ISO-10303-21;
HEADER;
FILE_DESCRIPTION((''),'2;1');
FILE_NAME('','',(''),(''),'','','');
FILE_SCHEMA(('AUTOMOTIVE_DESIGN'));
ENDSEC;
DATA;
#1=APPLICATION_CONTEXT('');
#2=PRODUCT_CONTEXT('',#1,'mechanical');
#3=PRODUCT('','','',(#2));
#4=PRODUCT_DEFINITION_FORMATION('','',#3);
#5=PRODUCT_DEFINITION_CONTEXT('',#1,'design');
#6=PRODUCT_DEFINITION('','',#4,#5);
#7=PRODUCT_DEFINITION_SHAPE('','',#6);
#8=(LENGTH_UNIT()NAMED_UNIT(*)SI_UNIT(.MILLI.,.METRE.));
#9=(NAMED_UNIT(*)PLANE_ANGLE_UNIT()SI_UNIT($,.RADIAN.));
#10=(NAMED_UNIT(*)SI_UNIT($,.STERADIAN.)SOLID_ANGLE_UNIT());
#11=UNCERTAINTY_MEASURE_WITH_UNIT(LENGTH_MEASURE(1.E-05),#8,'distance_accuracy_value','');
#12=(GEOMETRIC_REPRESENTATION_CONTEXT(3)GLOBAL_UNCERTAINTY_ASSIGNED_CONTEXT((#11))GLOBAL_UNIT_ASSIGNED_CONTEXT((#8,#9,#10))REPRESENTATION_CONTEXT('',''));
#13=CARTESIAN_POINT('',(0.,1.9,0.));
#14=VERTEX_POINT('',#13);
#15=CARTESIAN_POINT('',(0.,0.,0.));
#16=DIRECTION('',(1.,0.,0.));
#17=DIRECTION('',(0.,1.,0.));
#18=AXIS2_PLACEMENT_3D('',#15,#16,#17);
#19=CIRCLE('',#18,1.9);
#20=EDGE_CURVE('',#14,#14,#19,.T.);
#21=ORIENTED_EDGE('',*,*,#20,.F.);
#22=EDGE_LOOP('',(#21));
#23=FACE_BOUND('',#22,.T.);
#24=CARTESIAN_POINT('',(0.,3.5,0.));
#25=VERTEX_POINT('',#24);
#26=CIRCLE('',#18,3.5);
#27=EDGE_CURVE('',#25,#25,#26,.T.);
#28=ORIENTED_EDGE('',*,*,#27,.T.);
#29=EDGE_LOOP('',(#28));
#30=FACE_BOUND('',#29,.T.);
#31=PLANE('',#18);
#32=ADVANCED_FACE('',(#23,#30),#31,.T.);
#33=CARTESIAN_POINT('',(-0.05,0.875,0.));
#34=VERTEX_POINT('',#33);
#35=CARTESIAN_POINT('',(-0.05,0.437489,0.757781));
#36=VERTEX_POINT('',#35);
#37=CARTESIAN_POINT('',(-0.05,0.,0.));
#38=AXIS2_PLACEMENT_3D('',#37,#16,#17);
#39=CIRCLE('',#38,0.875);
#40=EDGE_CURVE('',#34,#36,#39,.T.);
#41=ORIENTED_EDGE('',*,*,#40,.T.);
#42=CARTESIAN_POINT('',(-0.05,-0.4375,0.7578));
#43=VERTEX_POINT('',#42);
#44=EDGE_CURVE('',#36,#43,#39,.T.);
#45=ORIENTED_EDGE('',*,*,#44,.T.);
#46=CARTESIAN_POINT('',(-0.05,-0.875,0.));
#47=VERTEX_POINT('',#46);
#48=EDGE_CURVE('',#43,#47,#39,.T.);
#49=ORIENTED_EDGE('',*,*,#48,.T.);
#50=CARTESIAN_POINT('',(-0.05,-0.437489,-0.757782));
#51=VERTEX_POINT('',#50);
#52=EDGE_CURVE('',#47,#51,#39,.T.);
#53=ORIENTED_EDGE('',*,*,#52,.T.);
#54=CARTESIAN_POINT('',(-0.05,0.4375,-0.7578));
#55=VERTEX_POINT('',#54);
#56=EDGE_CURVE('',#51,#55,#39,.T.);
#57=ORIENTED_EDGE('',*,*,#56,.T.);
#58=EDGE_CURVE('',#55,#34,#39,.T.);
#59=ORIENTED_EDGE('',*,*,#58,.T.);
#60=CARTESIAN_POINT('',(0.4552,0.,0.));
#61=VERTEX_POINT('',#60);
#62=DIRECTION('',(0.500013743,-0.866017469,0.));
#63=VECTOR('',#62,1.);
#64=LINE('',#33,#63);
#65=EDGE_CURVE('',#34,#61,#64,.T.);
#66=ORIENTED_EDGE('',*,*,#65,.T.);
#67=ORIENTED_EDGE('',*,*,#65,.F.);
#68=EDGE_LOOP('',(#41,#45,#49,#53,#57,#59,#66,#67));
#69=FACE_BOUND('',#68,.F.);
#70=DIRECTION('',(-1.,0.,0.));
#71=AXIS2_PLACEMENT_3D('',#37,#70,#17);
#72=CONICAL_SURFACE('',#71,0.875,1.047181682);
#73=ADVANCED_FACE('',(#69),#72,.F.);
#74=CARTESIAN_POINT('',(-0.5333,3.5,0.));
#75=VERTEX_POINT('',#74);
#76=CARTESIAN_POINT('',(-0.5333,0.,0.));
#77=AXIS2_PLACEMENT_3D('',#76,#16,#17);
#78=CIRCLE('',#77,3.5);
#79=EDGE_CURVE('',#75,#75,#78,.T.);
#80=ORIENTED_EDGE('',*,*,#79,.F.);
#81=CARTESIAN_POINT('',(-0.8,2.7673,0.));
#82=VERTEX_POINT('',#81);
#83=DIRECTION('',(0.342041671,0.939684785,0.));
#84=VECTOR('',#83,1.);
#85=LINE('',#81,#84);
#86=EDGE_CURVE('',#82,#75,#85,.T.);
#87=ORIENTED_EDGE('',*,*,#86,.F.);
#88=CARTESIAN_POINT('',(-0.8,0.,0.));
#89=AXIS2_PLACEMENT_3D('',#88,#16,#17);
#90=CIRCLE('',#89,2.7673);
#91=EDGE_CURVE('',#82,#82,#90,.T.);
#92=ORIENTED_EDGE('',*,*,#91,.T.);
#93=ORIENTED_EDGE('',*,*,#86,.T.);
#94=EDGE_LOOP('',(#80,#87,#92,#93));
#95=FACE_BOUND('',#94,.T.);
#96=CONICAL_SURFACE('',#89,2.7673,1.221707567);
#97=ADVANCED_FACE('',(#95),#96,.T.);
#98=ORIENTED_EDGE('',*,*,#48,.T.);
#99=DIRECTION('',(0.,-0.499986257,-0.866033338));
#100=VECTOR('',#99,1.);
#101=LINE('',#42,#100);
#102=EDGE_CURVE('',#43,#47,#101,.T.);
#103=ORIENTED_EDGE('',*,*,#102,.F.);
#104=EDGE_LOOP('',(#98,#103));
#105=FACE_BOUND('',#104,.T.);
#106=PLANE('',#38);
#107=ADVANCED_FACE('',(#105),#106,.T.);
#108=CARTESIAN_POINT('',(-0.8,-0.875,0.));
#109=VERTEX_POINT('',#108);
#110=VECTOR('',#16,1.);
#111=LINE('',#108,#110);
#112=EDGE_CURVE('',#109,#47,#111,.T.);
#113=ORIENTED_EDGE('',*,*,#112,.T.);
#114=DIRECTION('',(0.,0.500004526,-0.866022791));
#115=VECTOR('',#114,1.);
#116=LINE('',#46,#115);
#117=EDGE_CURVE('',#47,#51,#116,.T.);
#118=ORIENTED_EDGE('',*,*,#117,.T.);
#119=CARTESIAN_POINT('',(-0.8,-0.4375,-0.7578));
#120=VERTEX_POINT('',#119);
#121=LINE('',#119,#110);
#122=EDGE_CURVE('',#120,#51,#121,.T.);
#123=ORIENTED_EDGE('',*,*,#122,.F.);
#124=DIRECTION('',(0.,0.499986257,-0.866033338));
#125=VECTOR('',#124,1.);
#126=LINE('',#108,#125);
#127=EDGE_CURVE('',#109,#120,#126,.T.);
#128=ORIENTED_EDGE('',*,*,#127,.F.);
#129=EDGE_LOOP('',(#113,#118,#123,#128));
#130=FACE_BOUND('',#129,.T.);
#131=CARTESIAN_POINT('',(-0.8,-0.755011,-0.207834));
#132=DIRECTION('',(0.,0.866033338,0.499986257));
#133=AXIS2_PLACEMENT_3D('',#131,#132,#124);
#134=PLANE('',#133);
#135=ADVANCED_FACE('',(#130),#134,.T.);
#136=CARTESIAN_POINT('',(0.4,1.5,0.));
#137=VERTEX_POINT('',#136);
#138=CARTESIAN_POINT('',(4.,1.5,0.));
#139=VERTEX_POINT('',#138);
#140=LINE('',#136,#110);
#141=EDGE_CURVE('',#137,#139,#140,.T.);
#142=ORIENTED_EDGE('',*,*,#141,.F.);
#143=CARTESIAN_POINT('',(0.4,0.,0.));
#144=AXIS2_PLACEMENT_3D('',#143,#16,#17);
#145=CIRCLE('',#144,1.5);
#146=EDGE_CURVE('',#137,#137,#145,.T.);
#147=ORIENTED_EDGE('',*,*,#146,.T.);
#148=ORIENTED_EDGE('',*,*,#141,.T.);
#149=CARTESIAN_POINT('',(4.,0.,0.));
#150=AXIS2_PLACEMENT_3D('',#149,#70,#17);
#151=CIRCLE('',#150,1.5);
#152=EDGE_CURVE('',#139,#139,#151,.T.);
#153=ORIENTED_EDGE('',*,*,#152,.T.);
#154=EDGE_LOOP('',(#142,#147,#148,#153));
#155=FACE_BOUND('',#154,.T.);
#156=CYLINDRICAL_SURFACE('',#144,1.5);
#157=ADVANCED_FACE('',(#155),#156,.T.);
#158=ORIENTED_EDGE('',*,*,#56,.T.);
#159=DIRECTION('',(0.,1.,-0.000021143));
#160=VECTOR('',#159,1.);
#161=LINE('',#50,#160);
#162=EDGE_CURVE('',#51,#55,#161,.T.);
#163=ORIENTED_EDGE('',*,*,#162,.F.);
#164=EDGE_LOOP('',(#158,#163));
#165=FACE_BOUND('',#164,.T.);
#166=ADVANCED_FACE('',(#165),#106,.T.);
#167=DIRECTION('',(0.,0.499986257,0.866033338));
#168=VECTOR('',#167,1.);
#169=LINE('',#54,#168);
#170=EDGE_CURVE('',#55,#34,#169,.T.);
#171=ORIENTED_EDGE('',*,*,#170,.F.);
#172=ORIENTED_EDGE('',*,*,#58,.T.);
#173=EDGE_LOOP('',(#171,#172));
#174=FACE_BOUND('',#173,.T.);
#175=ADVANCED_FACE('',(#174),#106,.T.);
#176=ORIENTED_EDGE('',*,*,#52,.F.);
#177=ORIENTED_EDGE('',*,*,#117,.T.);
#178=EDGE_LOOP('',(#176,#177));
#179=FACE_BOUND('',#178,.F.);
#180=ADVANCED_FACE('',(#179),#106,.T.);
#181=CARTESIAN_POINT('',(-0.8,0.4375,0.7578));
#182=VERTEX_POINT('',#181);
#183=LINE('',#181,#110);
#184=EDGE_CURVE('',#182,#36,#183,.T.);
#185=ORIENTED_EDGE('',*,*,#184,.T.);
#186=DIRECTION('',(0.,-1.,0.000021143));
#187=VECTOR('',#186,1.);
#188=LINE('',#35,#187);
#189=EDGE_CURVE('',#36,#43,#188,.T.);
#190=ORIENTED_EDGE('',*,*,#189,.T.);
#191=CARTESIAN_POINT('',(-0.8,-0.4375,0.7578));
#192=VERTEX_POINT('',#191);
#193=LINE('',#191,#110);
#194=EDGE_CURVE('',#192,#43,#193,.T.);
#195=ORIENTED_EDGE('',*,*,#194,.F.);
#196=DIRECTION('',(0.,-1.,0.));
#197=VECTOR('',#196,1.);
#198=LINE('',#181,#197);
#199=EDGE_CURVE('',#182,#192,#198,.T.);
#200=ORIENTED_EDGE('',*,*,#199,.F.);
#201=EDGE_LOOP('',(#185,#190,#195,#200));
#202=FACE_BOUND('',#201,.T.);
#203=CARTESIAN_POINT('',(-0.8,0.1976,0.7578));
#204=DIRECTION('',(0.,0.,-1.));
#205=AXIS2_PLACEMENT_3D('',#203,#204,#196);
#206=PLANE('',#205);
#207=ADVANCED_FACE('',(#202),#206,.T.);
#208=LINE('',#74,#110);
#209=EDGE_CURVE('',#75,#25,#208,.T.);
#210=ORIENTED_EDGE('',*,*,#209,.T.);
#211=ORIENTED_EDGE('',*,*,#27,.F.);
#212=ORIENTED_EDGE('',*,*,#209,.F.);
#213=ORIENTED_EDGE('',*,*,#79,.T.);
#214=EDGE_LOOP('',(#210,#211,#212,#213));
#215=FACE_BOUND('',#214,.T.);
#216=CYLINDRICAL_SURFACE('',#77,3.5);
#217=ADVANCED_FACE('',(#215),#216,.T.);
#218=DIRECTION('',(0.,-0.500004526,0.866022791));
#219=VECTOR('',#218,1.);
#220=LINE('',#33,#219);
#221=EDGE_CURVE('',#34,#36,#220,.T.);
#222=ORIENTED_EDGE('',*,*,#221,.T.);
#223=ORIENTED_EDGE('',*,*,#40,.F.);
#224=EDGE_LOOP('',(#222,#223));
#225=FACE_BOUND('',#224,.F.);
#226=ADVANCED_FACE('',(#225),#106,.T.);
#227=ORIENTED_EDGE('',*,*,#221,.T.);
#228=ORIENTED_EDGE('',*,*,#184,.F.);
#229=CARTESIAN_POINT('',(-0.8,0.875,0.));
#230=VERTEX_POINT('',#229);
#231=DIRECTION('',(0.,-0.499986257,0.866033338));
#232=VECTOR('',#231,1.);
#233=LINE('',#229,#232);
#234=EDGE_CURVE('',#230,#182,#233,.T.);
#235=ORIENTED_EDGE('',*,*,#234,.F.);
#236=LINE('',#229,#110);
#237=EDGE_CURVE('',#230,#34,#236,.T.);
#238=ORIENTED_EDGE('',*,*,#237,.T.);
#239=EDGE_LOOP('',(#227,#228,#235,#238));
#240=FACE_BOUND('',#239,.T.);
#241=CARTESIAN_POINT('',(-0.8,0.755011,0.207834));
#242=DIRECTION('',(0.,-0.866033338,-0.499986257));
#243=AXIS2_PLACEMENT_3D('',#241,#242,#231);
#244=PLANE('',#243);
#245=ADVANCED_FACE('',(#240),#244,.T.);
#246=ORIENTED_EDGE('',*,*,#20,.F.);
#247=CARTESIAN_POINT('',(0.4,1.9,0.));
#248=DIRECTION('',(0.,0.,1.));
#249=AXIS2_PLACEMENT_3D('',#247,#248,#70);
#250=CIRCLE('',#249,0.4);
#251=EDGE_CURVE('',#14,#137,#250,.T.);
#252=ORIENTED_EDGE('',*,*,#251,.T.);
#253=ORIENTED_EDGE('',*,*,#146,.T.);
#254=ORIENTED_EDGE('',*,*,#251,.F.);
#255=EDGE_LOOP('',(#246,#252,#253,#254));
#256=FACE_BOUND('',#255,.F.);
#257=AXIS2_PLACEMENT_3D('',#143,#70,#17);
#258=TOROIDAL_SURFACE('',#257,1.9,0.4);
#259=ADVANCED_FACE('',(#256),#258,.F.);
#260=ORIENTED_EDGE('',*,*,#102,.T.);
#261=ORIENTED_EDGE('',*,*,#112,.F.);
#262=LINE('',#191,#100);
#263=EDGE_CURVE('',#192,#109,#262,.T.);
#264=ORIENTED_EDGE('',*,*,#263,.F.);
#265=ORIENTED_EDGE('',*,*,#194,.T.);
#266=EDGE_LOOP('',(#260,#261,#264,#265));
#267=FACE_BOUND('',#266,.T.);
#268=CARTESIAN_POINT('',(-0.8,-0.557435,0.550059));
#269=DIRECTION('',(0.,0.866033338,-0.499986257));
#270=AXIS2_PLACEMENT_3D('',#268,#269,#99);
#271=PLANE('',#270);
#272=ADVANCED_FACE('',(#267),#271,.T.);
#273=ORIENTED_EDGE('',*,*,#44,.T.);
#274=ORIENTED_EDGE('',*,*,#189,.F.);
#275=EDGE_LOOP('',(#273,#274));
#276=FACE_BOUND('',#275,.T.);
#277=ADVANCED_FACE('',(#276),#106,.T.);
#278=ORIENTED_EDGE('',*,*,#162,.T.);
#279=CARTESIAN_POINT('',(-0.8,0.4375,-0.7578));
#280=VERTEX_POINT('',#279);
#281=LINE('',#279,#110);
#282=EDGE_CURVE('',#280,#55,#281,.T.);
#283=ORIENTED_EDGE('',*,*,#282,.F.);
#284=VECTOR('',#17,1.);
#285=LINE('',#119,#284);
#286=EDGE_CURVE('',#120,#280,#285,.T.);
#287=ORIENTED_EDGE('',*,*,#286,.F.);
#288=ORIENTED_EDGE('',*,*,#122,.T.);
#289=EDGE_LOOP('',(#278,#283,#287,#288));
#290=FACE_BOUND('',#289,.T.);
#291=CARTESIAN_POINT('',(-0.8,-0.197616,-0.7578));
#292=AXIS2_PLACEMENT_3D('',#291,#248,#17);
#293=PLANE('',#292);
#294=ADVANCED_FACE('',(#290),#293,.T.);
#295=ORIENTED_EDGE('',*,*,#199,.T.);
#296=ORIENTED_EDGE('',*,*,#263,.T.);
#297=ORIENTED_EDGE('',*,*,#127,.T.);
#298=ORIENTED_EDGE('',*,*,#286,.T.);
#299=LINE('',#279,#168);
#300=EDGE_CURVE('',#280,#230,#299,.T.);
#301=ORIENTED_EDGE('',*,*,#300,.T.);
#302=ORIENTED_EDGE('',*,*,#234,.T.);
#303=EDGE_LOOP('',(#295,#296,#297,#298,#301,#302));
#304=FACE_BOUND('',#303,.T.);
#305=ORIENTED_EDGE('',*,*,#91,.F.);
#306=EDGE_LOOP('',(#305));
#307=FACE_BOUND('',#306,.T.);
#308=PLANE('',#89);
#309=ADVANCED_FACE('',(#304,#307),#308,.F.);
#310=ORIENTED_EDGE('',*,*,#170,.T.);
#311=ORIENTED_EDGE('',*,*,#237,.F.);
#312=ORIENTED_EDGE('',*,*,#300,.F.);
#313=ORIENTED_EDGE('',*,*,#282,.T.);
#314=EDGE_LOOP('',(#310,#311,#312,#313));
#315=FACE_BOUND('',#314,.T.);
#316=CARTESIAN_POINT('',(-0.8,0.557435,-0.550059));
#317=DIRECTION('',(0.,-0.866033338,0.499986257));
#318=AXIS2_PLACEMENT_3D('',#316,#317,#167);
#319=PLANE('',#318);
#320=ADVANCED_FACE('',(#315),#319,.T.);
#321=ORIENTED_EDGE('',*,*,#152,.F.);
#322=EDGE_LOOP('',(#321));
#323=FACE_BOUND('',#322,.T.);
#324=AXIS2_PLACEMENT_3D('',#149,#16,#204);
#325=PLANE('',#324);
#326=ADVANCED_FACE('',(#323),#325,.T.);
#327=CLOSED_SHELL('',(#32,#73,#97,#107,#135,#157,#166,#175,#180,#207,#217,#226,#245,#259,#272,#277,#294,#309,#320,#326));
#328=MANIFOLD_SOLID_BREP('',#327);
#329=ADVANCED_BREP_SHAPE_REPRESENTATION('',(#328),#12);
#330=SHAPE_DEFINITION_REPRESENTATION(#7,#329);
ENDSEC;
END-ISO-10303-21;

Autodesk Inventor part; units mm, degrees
ref_plane "YZ Plane" through (0, 0, 0) normal (1, 0, 0) x (0, 1, 0)
ref_plane "XZ Plane" through (0, 0, 0) normal (0, 1, 0) x (-1, 0, 0)
ref_plane "XY Plane" through (0, 0, 0) normal (0, 0, 1) x (1, 0, 0)
sketch "Sketch_1" plane through (0, 0, 0) normal (0, 0, 1) x (1, 0, 0)
  line L0 (6, 0) -> (0, 0)
  line L1 (-0.8, 0) -> (-0.8, 2.7673)
  line L2 (-0.8, 2.7673) -> (-0.5333, 3.5)
  line L3 (-0.5333, 3.5) -> (0, 3.5)
  line L4 (0, 3.5) -> (0, 1.9)
  arc A0 (0, 1.9) -> (0.4, 1.5) centre (0.4, 1.9) ccw
  line L5 (0.4, 1.5) -> (6, 1.5)
  line L6 (6, 1.5) -> (6, 0)
  line L7 (6, 0) -> (-0.8, 0)
  line L8 (0, 0) -> (-0.8, 0)
  dimension "d6" = 6
revolve "Revolution1" add sketch "Sketch_1" angle 360 about axis through (6, 0, 0) along (1, 0, 0)
thread "Thread1" size "M3x0.5" class "6g" standard "ISO Metric profile" length 5.5 offset 0.1
sketch "Sketch_5" plane through (-0.05, 0, 0) normal (1, 0, 0) x (0, 0, -1)
  arc A0 (-0.6801, -0.1159) -> (-0.4404, -0.531) centre (-0.5499, -0.3175) ccw
  arc A1 (-0.341, -0.5357) -> (-0.4404, -0.531) centre (-0.3947, -0.62) ccw
  arc A2 (-0.341, -0.5357) -> (-0.2934, -0.5632) centre (0, 0) ccw
  arc A3 (-0.2397, -0.6469) -> (-0.2934, -0.5632) centre (-0.3396, -0.6519) ccw
  arc A4 (-0.2397, -0.6469) -> (0.2397, -0.6469) centre (0, -0.635) ccw
  arc A5 (0.2934, -0.5632) -> (0.2397, -0.6469) centre (0.3396, -0.6519) ccw
  arc A6 (0.2934, -0.5632) -> (0.341, -0.5357) centre (0, 0) ccw
  arc A7 (0.4404, -0.531) -> (0.341, -0.5357) centre (0.3947, -0.62) ccw
  arc A8 (0.4404, -0.531) -> (0.6801, -0.1159) centre (0.5499, -0.3175) ccw
  arc A9 (0.6344, -0.0275) -> (0.6801, -0.1159) centre (0.7343, -0.0318) ccw
  arc A10 (0.6344, -0.0275) -> (0.6344, 0.0275) centre (0, 0) ccw
  arc A11 (0.6801, 0.1159) -> (0.6344, 0.0275) centre (0.7343, 0.0318) ccw
  arc A12 (0.6801, 0.1159) -> (0.4404, 0.531) centre (0.5499, 0.3175) ccw
  arc A13 (0.341, 0.5357) -> (0.4404, 0.531) centre (0.3947, 0.62) ccw
  arc A14 (0.341, 0.5357) -> (0.2934, 0.5632) centre (0, 0) ccw
  arc A15 (0.2397, 0.6469) -> (0.2934, 0.5632) centre (0.3396, 0.6519) ccw
  arc A16 (0.2397, 0.6469) -> (-0.2397, 0.6469) centre (0, 0.635) ccw
  arc A17 (-0.2934, 0.5632) -> (-0.2397, 0.6469) centre (-0.3396, 0.6519) ccw
  arc A18 (-0.2934, 0.5632) -> (-0.341, 0.5357) centre (0, 0) ccw
  arc A19 (-0.4404, 0.531) -> (-0.341, 0.5357) centre (-0.3947, 0.62) ccw
  arc A20 (-0.4404, 0.531) -> (-0.6801, 0.1159) centre (-0.5499, 0.3175) ccw
  arc A21 (-0.6344, 0.0275) -> (-0.6801, 0.1159) centre (-0.7343, 0.0318) ccw
  arc A22 (-0.6344, 0.0275) -> (-0.6344, -0.0275) centre (0, 0) ccw
  arc A23 (-0.6801, -0.1159) -> (-0.6344, -0.0275) centre (-0.7343, -0.0318) ccw
extrude "Extrusion1" cut sketch "Sketch_5" against normal blind 0.75
sketch "Sketch_2" plane through (0, 0, 0) normal (0, 0, 1) x (1, 0, 0)
  line L0 (0.4552, 0) -> (0, 0)
  line L1 (-0.05, 0) -> (-0.05, 0.875)
  line L2 (-0.05, 0.875) -> (0.4552, 0)
  line L3 (0.4552, 0) -> (-0.05, 0)
revolve "Revolution2" cut sketch "Sketch_2" angle 360 about axis through (0.4552, 0, 0) along (1, 0, 0)
sketch "スケッチ4" plane through (6, 0, 0) normal (1, 0, 0) x (0, 0, -1)
  circle A0 centre (0, 0) radius 1.5 projected
extrude "押し出し2" cut sketch "スケッチ4" against normal blind 2
sketch "スケッチ5" plane through (-0.8, 0, 0) normal (-1, 0, 0) x (0, 0, 1)
  arc A0 (0.4404, -0.531) -> (0.341, -0.5357) centre (0.3947, -0.62) ccw projected
  arc A1 (0.2934, -0.5632) -> (0.341, -0.5357) centre (0, 0) ccw projected
  arc A2 (0.2934, -0.5632) -> (0.2397, -0.6469) centre (0.3396, -0.6519) ccw projected
  arc A3 (-0.2397, -0.6469) -> (0.2397, -0.6469) centre (0, -0.635) ccw projected
  arc A4 (-0.2397, -0.6469) -> (-0.2934, -0.5632) centre (-0.3396, -0.6519) ccw projected
  arc A5 (-0.341, -0.5357) -> (-0.2934, -0.5632) centre (0, 0) ccw projected
  arc A6 (-0.341, -0.5357) -> (-0.4404, -0.531) centre (-0.3947, -0.62) ccw projected
  arc A7 (-0.6801, -0.1159) -> (-0.4404, -0.531) centre (-0.5499, -0.3175) ccw projected
  arc A8 (-0.6801, -0.1159) -> (-0.6344, -0.0275) centre (-0.7343, -0.0318) ccw projected
  arc A9 (-0.6344, 0.0275) -> (-0.6344, -0.0275) centre (0, 0) ccw projected
  arc A10 (-0.6344, 0.0275) -> (-0.6801, 0.1159) centre (-0.7343, 0.0318) ccw projected
  arc A11 (-0.4404, 0.531) -> (-0.6801, 0.1159) centre (-0.5499, 0.3175) ccw projected
  arc A12 (-0.4404, 0.531) -> (-0.341, 0.5357) centre (-0.3947, 0.62) ccw projected
  arc A13 (-0.2934, 0.5632) -> (-0.341, 0.5357) centre (0, 0) ccw projected
  arc A14 (-0.2934, 0.5632) -> (-0.2397, 0.6469) centre (-0.3396, 0.6519) ccw projected
  arc A15 (0.2397, 0.6469) -> (-0.2397, 0.6469) centre (0, 0.635) ccw projected
  arc A16 (0.2397, 0.6469) -> (0.2934, 0.5632) centre (0.3396, 0.6519) ccw projected
  arc A17 (0.341, 0.5357) -> (0.2934, 0.5632) centre (0, 0) ccw projected
  arc A18 (0.341, 0.5357) -> (0.4404, 0.531) centre (0.3947, 0.62) ccw projected
  arc A19 (0.6801, 0.1159) -> (0.4404, 0.531) centre (0.5499, 0.3175) ccw projected
  arc A20 (0.6801, 0.1159) -> (0.6344, 0.0275) centre (0.7343, 0.0318) ccw projected
  arc A21 (0.6344, -0.0275) -> (0.6344, 0.0275) centre (0, 0) ccw projected
  arc A22 (0.6344, -0.0275) -> (0.6801, -0.1159) centre (0.7343, -0.0318) ccw projected
  arc A23 (0.4404, -0.531) -> (0.6801, -0.1159) centre (0.5499, -0.3175) ccw projected
  circle A24 centre (0, 0) radius 2.7673 projected
  arc A25 (-0.6801, -0.1159) -> (-0.7578, -0.4375) centre (-0.5499, -0.3175) ccw projected
  line L0 (-0.7578, -0.4375) -> (-0.7578, 0.4375)
  line L1 (-0.7578, 0.4375) -> (0, 0.875)
  line L2 (0, 0.875) -> (0.7578, 0.4375)
  line L3 (0.7578, 0.4375) -> (0.7578, -0.4375)
  line L4 (0.7578, -0.4375) -> (0, -0.875)
  line L5 (0, -0.875) -> (-0.7578, -0.4375)
  point P0 (-0.5499, -0.5575)
  point P1 (-0.2078, -0.755)
  point P2 (-0.7578, 0.1975)
  point P3 (-0.7578, -0.1975)
  point P4 (-0.2078, 0.755)
  point P5 (-0.5499, 0.5575)
  point P6 (0.5499, 0.5575)
  point P7 (0.2078, 0.755)
  point P8 (0.7578, -0.1975)
  point P9 (0.7578, 0.1975)
  point P10 (0.2078, -0.755)
  point P11 (0.5499, -0.5575)
  point P12 (-0.7578, 0.4375)
  point P13 (-0.7578, 0.4375)
  point P14 (0, 0.875)
  point P15 (0, 0.875)
  point P16 (0, -0.875)
  point P17 (0, -0.875)
extrude "押し出し3" cut sketch "スケッチ5" against normal up to surface (0.75 mm away) contours A23 L4 A3 A2 A1 A0 | A23 A22 A21 A20 A19 L3 | L5 A7 A6 A5 A4 A3 | A19 A18 A17 A16 A15 L2 | L0 A11 A10 A9 A8 A7 | A15 A14 A13 A12 A11 L1
extrude "押し出し4" add sketch "スケッチ5" against normal up to surface (0.75 mm away) contours L4 A23 | L3 A23 | A3 L4 | A3 L5 | L3 A19 | L2 A19 | A7 L5 | A7 L0 | L2 A15 | L1 A15 | A11 L0 | A11 L1
properties part number "超極低頭ネジL4M3" material "ステンレス鋼"
